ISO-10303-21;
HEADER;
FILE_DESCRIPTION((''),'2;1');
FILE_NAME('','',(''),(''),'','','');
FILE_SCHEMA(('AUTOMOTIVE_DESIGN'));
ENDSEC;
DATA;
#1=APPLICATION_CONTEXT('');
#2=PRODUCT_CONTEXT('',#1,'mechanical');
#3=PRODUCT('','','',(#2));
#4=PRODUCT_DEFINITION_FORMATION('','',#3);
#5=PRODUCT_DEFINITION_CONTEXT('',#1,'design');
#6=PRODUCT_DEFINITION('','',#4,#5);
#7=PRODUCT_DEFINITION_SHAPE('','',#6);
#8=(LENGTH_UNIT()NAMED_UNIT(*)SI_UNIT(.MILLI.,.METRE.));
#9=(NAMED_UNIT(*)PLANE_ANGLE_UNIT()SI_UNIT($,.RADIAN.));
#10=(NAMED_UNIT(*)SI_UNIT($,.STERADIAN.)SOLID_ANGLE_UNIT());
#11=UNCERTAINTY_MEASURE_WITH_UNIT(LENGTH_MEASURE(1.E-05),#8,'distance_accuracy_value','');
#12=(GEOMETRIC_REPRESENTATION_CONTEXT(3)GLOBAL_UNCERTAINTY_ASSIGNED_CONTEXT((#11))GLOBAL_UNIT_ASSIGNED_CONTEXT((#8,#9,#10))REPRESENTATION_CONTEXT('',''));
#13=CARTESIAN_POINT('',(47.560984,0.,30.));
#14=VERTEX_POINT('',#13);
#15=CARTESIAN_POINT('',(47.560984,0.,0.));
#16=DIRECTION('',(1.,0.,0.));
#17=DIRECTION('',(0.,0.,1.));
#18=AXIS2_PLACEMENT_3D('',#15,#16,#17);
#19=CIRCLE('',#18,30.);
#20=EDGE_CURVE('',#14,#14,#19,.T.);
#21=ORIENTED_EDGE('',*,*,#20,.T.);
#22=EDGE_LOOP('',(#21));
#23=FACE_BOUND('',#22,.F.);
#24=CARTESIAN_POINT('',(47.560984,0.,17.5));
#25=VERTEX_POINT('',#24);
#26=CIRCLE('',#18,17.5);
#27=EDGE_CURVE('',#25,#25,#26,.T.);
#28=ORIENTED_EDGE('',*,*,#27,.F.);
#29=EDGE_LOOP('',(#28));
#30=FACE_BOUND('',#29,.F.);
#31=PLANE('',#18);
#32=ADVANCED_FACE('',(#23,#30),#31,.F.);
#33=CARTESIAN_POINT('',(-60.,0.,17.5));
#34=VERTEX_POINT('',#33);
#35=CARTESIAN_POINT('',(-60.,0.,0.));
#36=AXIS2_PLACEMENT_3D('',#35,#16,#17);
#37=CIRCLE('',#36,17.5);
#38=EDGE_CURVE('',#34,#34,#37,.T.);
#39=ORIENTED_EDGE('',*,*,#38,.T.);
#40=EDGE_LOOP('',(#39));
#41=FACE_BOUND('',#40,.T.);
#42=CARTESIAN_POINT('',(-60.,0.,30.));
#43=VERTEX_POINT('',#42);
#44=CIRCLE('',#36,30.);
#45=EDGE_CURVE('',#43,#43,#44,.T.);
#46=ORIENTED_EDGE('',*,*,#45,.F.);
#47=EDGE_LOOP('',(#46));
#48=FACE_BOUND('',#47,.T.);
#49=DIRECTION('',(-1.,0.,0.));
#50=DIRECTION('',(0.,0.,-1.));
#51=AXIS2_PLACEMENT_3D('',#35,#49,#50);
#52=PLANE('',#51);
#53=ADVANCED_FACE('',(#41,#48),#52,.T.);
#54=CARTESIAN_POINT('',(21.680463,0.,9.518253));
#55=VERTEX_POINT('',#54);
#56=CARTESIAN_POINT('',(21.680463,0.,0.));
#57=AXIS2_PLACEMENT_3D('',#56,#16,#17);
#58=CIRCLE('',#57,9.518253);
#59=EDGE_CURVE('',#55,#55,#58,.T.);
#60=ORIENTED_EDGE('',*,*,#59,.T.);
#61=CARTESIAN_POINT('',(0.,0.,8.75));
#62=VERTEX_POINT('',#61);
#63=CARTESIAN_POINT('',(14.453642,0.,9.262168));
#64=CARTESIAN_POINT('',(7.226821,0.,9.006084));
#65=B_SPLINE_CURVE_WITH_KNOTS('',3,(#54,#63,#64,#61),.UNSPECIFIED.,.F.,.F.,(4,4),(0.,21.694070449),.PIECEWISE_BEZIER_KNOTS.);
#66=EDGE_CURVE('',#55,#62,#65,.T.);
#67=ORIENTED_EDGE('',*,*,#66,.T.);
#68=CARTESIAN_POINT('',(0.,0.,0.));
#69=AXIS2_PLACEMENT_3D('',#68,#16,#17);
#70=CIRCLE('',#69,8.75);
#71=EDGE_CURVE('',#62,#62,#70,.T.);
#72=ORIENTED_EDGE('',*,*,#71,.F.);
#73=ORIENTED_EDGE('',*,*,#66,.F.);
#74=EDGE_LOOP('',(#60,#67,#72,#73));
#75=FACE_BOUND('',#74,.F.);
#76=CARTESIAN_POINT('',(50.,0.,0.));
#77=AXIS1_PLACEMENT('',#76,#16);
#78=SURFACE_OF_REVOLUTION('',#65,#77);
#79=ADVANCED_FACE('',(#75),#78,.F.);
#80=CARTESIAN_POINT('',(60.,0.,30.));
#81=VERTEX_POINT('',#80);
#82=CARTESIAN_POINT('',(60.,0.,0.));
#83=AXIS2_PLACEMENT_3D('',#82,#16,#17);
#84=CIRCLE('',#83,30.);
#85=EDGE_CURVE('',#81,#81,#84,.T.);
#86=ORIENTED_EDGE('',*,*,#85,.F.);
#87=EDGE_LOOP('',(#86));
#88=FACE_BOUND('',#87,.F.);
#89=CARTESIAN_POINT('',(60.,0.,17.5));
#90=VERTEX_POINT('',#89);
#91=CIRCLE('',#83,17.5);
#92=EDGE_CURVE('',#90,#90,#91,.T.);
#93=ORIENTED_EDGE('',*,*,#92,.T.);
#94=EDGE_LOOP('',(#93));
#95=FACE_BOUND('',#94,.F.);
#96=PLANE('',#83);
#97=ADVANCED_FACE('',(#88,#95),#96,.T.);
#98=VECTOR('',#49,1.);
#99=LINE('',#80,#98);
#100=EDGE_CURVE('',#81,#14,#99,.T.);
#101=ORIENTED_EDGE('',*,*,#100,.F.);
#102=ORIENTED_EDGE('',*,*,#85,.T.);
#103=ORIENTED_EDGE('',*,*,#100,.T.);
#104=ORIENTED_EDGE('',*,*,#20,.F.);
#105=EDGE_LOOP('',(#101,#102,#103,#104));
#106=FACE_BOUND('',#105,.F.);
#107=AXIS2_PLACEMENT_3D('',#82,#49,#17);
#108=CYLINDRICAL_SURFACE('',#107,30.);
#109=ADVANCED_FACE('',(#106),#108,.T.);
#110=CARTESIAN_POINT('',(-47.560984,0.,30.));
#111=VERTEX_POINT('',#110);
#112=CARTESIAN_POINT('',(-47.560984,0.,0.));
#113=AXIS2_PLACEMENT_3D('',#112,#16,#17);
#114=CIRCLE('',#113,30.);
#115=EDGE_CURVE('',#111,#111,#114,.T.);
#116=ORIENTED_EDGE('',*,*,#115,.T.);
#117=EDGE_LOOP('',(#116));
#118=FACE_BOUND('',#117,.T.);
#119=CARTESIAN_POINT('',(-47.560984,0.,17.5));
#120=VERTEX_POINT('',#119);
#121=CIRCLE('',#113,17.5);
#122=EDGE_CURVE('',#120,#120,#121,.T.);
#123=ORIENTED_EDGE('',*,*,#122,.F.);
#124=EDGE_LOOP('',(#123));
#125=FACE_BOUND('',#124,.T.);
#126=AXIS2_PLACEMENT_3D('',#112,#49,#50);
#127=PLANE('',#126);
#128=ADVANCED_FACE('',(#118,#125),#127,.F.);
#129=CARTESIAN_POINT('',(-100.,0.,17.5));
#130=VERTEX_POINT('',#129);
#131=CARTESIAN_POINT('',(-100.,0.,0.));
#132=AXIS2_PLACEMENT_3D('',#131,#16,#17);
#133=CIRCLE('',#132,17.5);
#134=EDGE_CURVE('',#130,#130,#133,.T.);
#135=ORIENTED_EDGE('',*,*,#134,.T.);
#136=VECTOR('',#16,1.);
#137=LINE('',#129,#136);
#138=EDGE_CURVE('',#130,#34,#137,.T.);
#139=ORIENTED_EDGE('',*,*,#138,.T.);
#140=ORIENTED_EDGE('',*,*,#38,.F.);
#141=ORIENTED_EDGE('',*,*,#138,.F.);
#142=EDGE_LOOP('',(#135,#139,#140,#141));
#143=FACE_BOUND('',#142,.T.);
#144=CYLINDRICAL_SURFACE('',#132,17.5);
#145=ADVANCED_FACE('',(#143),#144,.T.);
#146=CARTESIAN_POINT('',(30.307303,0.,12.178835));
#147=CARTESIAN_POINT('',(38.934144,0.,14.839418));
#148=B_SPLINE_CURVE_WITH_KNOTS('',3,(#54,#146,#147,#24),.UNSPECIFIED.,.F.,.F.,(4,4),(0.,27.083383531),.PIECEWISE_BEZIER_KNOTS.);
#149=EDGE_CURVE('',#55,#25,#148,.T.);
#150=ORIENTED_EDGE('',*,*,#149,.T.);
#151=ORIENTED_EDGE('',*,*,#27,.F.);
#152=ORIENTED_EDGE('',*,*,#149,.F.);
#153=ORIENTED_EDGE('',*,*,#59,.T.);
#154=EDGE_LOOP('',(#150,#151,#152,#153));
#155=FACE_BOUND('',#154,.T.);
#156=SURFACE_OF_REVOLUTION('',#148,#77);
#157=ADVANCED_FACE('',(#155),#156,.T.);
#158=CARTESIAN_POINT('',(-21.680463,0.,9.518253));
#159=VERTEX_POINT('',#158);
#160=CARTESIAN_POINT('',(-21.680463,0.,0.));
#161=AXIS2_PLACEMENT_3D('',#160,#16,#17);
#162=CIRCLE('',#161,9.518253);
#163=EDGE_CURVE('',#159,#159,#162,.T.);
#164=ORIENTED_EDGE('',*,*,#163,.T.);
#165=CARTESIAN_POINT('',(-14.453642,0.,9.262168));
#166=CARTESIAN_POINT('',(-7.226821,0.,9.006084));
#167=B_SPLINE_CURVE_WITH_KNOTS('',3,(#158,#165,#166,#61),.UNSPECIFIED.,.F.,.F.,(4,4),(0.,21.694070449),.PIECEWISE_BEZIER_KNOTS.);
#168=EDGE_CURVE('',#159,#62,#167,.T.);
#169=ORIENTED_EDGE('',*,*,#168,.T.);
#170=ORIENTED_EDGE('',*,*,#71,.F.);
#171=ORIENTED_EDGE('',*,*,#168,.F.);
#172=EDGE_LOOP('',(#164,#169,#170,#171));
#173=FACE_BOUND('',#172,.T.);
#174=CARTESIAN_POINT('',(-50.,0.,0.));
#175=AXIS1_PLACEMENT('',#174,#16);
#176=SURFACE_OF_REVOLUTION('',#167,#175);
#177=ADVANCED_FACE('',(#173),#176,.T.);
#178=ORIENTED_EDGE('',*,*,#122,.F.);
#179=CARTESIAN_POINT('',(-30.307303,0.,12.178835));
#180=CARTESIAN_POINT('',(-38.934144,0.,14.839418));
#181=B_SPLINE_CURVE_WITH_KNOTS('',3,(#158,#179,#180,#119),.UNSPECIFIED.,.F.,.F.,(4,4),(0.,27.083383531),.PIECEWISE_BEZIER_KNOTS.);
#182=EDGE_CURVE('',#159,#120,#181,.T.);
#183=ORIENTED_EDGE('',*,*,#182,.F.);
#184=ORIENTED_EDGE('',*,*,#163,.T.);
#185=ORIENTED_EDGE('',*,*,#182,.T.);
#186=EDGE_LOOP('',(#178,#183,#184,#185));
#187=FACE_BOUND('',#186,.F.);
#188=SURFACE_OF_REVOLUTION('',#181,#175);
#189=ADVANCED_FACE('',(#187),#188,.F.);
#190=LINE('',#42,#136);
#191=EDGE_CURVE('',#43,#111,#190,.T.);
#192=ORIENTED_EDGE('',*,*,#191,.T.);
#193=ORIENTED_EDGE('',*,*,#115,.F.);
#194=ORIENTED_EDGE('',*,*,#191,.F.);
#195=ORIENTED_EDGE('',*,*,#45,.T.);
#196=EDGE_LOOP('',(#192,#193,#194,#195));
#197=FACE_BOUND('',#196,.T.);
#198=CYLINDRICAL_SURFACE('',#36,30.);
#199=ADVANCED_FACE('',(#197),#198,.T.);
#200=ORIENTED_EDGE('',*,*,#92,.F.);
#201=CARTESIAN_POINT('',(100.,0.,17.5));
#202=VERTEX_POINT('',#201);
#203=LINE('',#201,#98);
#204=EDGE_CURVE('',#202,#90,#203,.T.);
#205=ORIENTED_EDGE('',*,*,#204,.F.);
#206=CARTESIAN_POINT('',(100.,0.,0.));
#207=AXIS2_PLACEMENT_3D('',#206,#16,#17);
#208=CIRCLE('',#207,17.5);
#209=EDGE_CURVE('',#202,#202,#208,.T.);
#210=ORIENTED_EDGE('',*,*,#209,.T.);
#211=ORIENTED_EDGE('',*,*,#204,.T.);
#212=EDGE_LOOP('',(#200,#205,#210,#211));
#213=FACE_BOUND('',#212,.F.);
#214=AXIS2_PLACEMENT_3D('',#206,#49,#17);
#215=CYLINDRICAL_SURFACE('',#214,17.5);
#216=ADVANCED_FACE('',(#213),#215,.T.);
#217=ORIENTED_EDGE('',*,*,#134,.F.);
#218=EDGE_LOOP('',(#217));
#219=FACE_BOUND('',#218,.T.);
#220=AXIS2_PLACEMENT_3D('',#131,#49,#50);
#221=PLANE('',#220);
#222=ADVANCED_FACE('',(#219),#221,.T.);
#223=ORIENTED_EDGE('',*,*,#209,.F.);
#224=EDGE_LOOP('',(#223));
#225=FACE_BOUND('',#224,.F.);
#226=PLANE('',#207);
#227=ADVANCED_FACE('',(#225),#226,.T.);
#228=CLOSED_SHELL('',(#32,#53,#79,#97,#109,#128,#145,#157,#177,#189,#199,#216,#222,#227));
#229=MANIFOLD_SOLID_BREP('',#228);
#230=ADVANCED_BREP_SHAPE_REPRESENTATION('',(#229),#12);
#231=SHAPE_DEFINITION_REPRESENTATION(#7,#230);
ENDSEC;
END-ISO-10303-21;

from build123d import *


with BuildPart() as f1:
    # F0 (on Front) → F1 (revolve)
    with BuildSketch(Plane.XZ):
        with BuildLine():
            Line((47.5609842221, 30), (47.5609842221, 17.5))
            add(Edge.make_bspline(
                [(21.6804631054, 9.5182526857), (30.3073034776, 12.1788351238), (38.9341438499, 14.8394175619), (47.5609842221, 17.5)],
                knots=[0, 0, 0, 0, 27.0833835305, 27.0833835305, 27.0833835305, 27.0833835305], degree=3))
            add(Edge.make_bspline(
                [(21.6804631054, 9.5182526857), (14.4536420703, 9.2621684571), (7.2268210351, 9.0060842286), (0, 8.75)],
                knots=[0, 0, 0, 0, 21.6940704492, 21.6940704492, 21.6940704492, 21.6940704492], degree=3))
            Line((0, 8.75), (0, 0))
            Line((0, 0), (100, 0))
            Line((100, 0), (100, 17.5))
            Line((100, 17.5), (60, 17.5))
            Line((60, 17.5), (60, 30))
            Line((60, 30), (47.5609842221, 30))
        make_face()
    revolve(axis=Axis((50, 0, 0), (1, 0, 0)))

    # F2: F1 across face


with BuildPart() as f1_1:
    add(f1.part)
    add(f1.part.mirror(Plane(origin=(0, 0, 0), x_dir=(0, -1, 0), z_dir=(-1, 0, 0))))


solid = f1_1.part
